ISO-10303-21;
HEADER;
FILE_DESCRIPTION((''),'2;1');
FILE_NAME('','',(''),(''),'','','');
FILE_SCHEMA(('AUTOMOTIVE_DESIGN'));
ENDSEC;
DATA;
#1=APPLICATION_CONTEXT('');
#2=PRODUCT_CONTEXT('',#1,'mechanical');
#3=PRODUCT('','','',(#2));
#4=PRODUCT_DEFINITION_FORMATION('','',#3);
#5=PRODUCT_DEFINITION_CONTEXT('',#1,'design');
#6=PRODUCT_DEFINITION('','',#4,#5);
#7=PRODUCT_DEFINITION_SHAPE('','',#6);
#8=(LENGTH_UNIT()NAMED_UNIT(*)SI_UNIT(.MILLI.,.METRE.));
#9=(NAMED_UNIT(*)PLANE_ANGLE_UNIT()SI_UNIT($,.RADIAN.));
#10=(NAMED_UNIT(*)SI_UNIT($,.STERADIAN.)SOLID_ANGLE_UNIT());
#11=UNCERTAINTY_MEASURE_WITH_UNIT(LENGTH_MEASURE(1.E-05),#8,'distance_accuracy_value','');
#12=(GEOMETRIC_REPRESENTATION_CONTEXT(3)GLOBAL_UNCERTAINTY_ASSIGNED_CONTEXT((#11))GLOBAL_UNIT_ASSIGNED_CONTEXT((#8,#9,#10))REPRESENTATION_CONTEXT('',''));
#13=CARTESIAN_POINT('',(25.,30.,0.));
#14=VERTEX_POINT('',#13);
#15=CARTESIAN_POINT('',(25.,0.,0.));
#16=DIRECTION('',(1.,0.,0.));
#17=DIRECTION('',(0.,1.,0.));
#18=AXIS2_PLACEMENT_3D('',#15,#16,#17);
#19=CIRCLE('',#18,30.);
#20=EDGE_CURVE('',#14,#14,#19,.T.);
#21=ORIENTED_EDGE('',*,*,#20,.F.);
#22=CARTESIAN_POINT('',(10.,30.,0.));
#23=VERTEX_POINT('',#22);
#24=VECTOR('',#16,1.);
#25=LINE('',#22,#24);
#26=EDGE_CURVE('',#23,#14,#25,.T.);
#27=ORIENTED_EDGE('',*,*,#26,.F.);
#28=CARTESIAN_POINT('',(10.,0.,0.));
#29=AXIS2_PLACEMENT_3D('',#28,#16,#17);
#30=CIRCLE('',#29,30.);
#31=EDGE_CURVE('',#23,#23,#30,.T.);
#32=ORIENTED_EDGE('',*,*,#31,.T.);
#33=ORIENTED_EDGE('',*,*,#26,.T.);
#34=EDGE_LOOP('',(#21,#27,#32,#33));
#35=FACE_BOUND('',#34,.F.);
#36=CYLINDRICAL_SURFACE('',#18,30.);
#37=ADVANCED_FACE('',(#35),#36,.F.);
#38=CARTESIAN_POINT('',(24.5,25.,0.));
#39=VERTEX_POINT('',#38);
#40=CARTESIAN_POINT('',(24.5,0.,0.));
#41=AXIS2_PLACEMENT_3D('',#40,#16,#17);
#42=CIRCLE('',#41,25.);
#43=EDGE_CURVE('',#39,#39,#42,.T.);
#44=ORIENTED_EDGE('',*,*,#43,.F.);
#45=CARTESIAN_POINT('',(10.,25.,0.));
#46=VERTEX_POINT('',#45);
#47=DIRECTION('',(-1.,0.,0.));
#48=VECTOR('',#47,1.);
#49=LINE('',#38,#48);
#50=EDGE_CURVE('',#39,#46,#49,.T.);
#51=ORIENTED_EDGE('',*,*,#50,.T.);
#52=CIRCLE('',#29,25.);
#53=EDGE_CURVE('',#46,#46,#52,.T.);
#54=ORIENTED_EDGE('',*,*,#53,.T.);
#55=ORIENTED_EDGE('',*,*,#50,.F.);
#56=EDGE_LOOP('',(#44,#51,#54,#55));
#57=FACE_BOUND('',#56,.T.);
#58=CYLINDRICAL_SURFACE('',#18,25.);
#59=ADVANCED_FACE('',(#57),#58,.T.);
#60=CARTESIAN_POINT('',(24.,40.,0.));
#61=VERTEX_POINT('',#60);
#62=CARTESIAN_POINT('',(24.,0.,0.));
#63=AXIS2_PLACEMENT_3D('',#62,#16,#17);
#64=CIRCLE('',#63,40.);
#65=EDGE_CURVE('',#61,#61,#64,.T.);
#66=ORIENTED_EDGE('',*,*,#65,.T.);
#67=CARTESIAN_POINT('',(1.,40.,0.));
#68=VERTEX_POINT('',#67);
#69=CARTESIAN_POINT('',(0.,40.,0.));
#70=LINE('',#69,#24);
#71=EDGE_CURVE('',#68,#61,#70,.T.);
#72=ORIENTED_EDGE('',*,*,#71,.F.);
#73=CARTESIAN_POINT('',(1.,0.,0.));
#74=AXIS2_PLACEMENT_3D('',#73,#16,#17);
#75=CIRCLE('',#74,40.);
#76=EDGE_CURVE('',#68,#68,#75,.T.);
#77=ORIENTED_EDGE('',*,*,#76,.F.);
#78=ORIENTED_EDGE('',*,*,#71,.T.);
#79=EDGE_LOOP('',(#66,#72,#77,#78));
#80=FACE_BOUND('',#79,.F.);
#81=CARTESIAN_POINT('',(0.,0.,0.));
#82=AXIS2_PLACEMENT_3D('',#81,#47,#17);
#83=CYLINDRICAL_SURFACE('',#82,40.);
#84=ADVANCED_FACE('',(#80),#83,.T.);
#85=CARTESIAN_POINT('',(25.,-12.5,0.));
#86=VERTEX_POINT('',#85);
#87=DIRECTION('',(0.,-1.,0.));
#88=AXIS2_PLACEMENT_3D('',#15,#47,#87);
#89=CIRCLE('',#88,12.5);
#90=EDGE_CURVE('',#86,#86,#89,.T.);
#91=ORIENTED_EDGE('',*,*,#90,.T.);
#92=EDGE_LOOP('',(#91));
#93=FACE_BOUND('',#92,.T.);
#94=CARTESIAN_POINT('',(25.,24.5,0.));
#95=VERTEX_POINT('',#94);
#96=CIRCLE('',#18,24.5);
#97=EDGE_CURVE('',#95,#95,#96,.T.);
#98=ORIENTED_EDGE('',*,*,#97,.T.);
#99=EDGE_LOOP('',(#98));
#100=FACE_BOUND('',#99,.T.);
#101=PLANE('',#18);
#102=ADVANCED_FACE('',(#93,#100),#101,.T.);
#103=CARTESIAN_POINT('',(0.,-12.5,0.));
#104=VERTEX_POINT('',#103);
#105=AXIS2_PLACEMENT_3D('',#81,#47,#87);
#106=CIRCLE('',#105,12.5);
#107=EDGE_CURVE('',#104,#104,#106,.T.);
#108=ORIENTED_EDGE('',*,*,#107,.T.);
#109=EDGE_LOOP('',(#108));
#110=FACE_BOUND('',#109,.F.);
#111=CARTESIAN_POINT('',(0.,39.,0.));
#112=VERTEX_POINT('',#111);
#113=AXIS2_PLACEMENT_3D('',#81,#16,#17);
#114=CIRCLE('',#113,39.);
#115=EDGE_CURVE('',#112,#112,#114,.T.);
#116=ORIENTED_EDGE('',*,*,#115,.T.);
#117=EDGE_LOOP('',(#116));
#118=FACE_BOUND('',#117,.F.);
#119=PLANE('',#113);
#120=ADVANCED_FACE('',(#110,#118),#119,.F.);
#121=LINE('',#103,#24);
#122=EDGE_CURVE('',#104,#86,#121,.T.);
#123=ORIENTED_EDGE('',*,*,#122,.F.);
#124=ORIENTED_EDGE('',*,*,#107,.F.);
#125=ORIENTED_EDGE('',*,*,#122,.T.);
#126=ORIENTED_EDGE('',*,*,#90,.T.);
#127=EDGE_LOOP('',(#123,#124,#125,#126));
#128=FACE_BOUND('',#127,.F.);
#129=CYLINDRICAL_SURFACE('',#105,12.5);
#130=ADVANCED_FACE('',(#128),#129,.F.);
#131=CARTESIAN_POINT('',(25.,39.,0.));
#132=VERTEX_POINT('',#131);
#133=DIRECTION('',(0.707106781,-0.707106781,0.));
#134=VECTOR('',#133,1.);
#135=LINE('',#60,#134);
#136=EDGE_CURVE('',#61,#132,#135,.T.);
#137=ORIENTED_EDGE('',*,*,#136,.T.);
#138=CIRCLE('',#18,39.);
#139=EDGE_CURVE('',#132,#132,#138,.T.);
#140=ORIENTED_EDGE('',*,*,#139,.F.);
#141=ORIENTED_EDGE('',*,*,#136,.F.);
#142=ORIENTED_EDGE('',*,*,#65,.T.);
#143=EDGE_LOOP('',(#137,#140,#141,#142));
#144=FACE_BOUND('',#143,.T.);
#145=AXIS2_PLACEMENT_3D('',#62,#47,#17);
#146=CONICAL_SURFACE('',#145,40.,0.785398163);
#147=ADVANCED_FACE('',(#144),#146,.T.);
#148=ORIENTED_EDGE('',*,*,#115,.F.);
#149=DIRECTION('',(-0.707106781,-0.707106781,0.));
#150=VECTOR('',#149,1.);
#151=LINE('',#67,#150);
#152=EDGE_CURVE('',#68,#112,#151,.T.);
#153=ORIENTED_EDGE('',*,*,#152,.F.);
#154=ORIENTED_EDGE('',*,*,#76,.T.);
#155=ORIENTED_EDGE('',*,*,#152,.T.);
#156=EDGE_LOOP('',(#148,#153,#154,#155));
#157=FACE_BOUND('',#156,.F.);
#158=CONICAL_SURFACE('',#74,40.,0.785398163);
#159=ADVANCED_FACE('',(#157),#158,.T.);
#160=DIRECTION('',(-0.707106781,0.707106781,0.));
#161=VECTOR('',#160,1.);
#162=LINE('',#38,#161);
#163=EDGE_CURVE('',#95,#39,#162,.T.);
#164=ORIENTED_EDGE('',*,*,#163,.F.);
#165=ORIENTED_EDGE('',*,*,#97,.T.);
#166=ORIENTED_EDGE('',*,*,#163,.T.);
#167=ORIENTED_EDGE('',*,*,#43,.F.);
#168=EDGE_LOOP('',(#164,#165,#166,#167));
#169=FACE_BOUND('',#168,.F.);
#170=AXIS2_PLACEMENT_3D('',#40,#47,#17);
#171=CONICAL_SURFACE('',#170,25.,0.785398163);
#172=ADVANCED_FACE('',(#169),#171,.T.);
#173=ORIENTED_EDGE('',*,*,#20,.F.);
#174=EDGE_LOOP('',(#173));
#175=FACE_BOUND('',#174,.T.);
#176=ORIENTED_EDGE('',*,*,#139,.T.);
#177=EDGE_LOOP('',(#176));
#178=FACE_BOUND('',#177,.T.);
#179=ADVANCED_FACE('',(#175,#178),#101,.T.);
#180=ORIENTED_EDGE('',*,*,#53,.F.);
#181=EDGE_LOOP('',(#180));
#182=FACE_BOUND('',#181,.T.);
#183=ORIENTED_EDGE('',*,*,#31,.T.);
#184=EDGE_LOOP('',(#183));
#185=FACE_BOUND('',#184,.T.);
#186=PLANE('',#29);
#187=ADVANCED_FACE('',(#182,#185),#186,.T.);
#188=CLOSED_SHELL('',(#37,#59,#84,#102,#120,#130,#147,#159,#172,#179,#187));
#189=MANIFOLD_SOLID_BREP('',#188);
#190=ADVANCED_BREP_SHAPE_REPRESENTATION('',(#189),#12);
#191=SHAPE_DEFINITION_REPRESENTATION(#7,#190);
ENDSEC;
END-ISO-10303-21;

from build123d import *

# Parameters (mm, degrees)
F0_R     = 40
F1_DEPTH = 25
F2_R     = 12.5
F3_DEPTH = 25.001
F4_SIZE  = 1
F5_R     = 30
F5_R_2   = 25
F6_DEPTH = 15
F8_SIZE  = 0.5
F9_DEPTH = 10


# Not quite as in the source:
# - two fillets or chamfers of one size are made in one step


with BuildPart() as f1:
    # F0 (on Right) → F1 (new body)
    with BuildSketch(Plane.YZ):
        Circle(F0_R)
    extrude(amount=F1_DEPTH)

    # F2 (on face) → F3 (cut, through all)
    with BuildSketch(Plane(origin=(0, 0, 0), x_dir=(0, -1, 0), z_dir=(-1, 0, 0))):
        Circle(F2_R)
    extrude(amount=-F3_DEPTH, mode=Mode.SUBTRACT)

    # F4
    f4_edges = [f1.edges().sort_by_distance(p)[0] for p in [
        (0, -40, 0),
        (25, -40, 0),
    ]]
    chamfer(f4_edges, length=F4_SIZE)

    # F5 (on face) → F6 (cut)
    with BuildSketch(Plane.YZ.offset(25)):
        Circle(F5_R)
        Circle(F5_R_2, mode=Mode.SUBTRACT)
    extrude(amount=-F6_DEPTH, mode=Mode.SUBTRACT)

    # F8
    f8_edges = [f1.edges().sort_by_distance(p)[0] for p in [
        (25, -25, 0),
    ]]
    chamfer(f8_edges, length=F8_SIZE)

    # F5 (on face) → F9 (cut)
    with BuildSketch(Plane.YZ.offset(25)):
        Circle(F5_R)
        Circle(F5_R_2, mode=Mode.SUBTRACT)
    extrude(amount=-F9_DEPTH, mode=Mode.SUBTRACT)


solid = f1.part
